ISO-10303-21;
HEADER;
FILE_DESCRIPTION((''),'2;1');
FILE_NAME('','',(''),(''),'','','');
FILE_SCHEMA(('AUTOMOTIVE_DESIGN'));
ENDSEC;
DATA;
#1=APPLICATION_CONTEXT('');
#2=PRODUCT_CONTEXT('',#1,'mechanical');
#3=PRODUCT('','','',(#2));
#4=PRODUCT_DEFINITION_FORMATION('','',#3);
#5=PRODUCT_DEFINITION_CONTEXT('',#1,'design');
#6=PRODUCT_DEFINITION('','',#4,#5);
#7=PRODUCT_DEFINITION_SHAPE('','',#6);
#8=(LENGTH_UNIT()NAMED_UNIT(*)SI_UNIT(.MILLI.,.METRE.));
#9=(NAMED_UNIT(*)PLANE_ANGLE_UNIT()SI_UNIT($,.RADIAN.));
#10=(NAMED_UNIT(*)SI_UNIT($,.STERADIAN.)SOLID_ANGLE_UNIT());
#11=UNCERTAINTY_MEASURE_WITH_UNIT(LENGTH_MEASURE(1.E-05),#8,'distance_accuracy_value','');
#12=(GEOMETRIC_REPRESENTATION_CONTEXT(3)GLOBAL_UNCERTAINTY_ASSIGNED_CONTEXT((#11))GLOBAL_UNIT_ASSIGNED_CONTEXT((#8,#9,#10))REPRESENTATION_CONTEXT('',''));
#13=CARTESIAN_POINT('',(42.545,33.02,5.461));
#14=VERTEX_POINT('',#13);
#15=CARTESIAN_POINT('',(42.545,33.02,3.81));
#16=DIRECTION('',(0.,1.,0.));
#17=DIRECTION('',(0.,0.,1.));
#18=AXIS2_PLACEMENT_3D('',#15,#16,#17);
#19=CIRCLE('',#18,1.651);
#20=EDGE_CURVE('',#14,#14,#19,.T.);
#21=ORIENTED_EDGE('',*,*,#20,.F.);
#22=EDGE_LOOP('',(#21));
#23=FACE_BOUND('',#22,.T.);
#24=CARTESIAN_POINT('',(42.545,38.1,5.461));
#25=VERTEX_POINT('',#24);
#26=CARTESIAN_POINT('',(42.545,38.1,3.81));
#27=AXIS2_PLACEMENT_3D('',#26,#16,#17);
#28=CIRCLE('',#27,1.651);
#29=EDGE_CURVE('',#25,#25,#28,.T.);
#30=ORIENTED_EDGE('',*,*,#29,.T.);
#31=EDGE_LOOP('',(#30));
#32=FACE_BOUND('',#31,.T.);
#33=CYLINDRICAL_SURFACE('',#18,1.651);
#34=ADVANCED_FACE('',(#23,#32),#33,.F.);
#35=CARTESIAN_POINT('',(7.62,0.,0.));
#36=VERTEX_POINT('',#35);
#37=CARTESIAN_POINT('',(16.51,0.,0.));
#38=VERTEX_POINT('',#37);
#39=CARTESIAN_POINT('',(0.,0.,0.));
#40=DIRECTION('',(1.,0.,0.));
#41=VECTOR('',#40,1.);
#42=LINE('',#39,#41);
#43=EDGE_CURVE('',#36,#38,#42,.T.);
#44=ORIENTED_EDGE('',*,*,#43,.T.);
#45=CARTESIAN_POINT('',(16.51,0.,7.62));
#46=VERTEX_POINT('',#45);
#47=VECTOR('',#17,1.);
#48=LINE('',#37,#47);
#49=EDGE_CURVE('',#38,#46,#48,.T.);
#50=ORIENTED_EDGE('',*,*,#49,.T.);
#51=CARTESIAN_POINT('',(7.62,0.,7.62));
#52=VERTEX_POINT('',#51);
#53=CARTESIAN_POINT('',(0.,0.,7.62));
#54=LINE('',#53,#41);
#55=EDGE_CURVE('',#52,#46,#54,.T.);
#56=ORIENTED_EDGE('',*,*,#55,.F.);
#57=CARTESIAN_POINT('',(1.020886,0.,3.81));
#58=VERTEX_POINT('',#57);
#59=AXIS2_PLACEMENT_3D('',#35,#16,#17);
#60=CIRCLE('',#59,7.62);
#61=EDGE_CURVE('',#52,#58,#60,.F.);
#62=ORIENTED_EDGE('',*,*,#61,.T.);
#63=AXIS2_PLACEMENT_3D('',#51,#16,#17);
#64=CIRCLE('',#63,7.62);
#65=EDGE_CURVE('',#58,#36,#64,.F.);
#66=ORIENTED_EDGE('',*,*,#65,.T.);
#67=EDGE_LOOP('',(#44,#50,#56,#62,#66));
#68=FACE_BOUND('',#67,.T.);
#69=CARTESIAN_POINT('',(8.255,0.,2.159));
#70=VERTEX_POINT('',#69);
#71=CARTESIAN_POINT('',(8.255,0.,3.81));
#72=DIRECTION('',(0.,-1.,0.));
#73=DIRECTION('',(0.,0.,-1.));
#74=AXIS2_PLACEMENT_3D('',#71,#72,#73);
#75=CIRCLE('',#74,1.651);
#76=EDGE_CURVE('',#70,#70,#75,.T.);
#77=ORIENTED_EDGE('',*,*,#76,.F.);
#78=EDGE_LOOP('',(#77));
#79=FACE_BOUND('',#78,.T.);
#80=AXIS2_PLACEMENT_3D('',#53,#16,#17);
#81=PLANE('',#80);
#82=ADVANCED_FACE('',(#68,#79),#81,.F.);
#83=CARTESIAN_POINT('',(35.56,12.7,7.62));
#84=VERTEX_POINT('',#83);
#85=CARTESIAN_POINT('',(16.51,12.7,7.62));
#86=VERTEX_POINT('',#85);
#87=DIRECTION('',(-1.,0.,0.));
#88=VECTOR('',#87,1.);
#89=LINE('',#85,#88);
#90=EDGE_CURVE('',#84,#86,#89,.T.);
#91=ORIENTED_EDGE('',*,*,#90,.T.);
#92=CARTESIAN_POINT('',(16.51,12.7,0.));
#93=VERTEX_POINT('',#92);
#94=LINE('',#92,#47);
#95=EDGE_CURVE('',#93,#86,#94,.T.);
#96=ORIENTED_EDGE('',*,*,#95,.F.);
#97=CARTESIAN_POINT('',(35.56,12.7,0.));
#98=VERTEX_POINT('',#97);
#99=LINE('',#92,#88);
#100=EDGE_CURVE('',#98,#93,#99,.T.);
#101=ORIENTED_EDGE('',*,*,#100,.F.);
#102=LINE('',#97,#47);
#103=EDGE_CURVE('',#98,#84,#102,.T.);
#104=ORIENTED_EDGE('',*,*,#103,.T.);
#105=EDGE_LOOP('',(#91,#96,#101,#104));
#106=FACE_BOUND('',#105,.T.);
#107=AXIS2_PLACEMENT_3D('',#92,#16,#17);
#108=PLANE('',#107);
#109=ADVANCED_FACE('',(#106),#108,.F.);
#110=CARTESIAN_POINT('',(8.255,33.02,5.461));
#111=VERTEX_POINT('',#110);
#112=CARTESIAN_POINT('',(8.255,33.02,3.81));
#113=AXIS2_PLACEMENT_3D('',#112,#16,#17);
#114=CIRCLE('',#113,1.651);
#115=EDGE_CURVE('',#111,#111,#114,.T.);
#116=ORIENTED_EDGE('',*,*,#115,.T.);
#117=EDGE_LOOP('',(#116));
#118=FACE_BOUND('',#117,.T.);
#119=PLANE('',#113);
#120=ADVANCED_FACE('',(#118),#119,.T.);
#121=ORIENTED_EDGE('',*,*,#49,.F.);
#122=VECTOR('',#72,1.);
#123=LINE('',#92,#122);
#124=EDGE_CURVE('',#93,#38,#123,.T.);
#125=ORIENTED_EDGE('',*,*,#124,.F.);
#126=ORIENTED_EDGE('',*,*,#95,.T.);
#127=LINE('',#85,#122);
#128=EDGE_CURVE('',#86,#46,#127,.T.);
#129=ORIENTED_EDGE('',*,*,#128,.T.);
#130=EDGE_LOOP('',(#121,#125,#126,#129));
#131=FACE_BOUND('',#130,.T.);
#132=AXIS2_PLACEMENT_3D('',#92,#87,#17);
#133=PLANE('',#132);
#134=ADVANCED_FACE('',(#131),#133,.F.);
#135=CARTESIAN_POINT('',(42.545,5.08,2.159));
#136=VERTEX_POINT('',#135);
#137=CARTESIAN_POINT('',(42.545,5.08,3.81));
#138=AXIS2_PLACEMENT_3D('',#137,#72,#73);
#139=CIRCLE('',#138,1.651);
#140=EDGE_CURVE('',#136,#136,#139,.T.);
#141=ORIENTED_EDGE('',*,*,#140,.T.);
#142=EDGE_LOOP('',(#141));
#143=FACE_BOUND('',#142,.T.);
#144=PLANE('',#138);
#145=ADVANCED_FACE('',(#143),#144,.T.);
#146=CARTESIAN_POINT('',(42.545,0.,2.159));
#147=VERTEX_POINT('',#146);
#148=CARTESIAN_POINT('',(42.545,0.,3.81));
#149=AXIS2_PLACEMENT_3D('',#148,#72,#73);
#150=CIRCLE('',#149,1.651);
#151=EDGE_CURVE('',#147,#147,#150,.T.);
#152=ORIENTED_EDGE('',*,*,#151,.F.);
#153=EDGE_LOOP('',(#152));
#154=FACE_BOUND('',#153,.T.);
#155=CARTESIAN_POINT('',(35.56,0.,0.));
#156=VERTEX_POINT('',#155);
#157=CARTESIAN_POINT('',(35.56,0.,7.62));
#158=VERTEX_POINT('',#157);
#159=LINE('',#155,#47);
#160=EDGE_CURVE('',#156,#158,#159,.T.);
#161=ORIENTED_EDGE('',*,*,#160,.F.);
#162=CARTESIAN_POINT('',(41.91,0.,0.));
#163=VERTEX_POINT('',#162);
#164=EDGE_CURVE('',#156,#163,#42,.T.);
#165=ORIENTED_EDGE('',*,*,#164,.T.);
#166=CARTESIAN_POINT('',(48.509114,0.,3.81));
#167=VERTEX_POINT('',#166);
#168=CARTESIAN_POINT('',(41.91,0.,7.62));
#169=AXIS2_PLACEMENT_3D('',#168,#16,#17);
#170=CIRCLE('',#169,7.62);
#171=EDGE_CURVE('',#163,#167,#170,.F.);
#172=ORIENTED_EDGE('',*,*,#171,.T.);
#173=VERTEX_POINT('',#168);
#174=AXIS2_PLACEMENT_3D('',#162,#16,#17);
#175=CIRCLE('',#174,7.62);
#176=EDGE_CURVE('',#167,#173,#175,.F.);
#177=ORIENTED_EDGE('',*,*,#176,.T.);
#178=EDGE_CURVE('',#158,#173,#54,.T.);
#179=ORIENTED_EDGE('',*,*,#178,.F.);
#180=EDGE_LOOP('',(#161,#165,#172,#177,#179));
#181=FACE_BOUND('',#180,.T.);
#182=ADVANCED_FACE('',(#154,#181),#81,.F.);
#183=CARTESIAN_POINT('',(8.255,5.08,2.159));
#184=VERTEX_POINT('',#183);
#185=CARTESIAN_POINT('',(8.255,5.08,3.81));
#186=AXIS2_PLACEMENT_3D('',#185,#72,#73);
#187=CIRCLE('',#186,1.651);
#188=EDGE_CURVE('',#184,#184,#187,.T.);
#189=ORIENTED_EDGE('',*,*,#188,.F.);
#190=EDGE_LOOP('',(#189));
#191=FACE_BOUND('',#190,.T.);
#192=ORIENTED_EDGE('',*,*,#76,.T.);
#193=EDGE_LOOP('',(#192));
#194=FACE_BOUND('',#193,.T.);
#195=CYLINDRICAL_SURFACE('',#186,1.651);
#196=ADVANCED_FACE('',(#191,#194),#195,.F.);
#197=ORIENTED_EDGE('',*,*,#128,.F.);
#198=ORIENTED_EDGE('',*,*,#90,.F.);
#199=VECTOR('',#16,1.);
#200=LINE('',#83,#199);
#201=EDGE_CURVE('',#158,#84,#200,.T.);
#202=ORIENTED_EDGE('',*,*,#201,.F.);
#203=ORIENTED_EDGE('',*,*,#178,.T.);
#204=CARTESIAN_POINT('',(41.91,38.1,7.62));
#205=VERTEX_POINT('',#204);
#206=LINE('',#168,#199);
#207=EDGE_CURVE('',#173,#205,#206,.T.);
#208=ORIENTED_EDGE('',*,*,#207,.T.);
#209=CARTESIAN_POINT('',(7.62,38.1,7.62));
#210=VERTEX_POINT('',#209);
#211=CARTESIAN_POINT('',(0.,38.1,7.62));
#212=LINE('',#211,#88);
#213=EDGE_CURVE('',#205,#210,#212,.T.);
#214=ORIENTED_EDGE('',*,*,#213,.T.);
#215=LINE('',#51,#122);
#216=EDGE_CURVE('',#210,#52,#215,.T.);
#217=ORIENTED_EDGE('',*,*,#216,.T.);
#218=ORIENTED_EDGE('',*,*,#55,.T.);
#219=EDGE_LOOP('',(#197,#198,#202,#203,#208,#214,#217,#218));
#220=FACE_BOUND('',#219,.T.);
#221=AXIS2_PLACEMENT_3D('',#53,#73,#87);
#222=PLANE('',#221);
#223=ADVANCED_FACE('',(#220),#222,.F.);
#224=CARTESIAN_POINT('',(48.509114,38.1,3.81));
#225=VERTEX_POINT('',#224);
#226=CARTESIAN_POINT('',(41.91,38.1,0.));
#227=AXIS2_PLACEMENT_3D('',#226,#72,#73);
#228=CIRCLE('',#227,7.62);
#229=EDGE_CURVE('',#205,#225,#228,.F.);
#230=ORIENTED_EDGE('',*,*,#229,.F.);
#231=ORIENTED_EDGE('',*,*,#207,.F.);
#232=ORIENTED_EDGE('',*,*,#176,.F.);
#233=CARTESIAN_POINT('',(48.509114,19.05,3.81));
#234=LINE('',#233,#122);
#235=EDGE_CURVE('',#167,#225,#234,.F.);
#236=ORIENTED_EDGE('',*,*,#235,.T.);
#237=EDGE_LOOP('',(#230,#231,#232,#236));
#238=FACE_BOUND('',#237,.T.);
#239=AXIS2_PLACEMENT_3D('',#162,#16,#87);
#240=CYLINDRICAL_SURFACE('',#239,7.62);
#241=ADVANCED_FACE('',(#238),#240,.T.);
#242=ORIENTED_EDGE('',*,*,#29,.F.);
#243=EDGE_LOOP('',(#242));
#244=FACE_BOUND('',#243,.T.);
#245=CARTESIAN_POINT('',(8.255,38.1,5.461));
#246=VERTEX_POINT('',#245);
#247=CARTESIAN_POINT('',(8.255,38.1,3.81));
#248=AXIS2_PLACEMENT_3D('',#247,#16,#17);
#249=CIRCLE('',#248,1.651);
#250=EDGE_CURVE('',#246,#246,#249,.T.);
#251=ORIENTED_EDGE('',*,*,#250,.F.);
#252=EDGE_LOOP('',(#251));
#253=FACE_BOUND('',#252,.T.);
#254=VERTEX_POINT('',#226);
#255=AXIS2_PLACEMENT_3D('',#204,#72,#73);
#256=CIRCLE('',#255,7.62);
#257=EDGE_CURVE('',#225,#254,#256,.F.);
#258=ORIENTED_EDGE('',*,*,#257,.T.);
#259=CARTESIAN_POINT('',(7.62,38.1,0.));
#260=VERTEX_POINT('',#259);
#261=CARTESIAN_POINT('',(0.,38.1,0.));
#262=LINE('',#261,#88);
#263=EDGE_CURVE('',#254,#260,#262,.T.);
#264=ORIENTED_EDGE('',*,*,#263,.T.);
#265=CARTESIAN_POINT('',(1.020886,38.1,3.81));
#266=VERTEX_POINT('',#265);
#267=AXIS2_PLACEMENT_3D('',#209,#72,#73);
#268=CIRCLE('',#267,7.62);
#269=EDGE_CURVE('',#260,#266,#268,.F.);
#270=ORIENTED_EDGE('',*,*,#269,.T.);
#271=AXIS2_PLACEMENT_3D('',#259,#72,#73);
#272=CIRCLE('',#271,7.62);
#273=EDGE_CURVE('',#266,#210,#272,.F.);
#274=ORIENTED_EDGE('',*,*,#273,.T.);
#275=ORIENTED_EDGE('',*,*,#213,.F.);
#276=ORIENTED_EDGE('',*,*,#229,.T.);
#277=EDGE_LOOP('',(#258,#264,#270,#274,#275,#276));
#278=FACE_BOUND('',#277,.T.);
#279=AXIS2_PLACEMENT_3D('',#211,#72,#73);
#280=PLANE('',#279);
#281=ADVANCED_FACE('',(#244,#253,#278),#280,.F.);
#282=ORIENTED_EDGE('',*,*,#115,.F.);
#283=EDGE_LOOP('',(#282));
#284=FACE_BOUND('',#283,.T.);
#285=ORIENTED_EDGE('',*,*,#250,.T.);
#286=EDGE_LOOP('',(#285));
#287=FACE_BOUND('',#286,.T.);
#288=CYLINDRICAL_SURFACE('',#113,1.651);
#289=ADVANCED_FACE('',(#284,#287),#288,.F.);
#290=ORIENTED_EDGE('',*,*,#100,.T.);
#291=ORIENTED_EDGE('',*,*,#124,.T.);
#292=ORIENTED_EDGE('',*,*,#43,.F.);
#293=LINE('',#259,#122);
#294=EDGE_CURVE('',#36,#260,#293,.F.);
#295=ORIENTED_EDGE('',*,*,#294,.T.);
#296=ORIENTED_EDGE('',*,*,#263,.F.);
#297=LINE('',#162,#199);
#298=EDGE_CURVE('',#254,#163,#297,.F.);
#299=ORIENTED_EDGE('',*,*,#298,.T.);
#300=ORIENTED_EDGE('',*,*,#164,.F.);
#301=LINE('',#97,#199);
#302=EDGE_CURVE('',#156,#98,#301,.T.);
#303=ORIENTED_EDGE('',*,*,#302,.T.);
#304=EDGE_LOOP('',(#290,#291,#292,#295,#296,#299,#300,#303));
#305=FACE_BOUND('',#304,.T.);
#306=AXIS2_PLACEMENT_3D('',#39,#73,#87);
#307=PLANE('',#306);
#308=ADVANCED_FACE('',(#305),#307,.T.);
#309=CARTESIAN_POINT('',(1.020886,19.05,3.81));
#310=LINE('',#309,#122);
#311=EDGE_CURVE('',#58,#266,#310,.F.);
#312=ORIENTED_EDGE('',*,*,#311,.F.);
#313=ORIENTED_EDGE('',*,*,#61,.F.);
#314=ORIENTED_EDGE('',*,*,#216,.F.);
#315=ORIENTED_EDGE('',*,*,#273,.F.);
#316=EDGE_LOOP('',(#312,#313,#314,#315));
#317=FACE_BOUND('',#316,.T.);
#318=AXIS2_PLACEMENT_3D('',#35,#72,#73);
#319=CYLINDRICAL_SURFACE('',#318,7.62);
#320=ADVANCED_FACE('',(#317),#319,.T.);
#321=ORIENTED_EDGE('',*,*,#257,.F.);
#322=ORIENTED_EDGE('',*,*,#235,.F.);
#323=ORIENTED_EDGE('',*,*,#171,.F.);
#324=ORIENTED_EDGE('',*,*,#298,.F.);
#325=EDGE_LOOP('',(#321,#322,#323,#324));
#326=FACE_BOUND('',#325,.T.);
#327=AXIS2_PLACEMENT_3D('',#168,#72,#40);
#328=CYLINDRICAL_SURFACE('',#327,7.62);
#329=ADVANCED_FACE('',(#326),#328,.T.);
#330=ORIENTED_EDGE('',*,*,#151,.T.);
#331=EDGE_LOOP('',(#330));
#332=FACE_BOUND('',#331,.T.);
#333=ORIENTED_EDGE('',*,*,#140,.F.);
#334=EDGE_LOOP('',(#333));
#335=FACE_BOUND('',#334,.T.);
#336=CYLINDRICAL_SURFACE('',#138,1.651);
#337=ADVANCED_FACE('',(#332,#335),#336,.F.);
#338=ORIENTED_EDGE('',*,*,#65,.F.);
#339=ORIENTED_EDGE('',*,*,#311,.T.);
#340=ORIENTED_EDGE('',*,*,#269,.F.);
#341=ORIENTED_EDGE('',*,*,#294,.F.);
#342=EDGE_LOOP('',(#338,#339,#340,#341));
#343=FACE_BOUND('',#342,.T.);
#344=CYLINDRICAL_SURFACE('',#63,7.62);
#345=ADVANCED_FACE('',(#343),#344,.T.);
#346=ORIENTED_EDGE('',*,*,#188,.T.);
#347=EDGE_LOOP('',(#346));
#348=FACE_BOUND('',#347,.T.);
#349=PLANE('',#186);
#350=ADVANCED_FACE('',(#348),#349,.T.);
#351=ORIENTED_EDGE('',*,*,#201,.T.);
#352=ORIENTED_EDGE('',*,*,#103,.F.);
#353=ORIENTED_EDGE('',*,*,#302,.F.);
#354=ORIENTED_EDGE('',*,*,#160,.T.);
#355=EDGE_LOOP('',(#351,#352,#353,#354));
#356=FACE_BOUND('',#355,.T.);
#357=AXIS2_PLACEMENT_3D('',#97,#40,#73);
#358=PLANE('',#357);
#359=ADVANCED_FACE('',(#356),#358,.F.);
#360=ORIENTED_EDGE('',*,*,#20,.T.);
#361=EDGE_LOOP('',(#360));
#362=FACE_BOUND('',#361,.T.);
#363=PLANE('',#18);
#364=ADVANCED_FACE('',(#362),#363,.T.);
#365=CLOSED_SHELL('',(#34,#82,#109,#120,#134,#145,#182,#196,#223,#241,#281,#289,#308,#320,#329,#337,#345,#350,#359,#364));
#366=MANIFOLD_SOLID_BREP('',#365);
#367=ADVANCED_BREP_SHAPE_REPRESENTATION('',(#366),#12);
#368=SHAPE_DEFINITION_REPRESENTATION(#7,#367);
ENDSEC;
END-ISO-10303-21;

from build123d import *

# Parameters (mm, degrees)
SKETCH3_W           = 49.53
SKETCH3_H           = 38.1
BOSS_EXTRUDE2_DEPTH = 7.62
SKETCH4_W           = 19.05
SKETCH4_H           = 12.7
CUT_EXTRUDE1_DEPTH  = 63.951531355
SKETCH6_R           = 1.651
CUT_EXTRUDE2_DEPTH  = 5.08
CUT_EXTRUDE3_START  = -5.08
SKETCH8_R           = 1.651
CUT_EXTRUDE3_DEPTH  = 5.08
FILLET3_R           = 7.62


with BuildPart() as part:
    # Sketch3 → Boss-Extrude2 (new body)
    with BuildSketch(Plane.XY):
        with Locations((24.765, 19.05)):
            Rectangle(SKETCH3_W, SKETCH3_H)
    extrude(amount=BOSS_EXTRUDE2_DEPTH)

    # Sketch4 → Cut-Extrude1 (cut, through all)
    with BuildSketch(Plane.XY.offset(7.62)):
        with Locations((26.035, 6.35)):
            Rectangle(SKETCH4_W, SKETCH4_H)
    extrude(amount=-CUT_EXTRUDE1_DEPTH, mode=Mode.SUBTRACT)

    # Sketch6 → Cut-Extrude2 (cut)
    with BuildSketch(Plane.XZ):
        with Locations(Location((8.255, 3.81, 0), (0, 0, 270))):
            Circle(SKETCH6_R)
        with Locations(Location((42.545, 3.81, 0), (0, 0, 270))):
            Circle(SKETCH6_R)
    extrude(amount=-CUT_EXTRUDE2_DEPTH, mode=Mode.SUBTRACT)

    # Sketch8 → Cut-Extrude3 (cut)
    with BuildSketch(Plane(origin=(0, 38.1, 0), x_dir=(1, 0, 0), z_dir=(0, 1, 0)).offset(CUT_EXTRUDE3_START)):
        with Locations(Location((8.255, -3.81, 0), (0, 0, 90))):
            Circle(SKETCH8_R)
        with Locations(Location((42.545, -3.81, 0), (0, 0, 90))):
            Circle(SKETCH8_R)
    extrude(amount=CUT_EXTRUDE3_DEPTH, mode=Mode.SUBTRACT)

    # Fillet3
    # the kernel refuses this fillet: 7.62 mm, written as the material it takes off along each edge
    with BuildSketch(Plane(origin=(49.53, -19.05, 7.62), x_dir=(-1, 0, 0), z_dir=(0, 1, 0))) as fillet3_piece_1:
        with BuildLine():
            CenterArc((FILLET3_R, -FILLET3_R), FILLET3_R, 90, 90)
            Line((0, -FILLET3_R), (0, 0))
            Line((0, 0), (FILLET3_R, 0))
        make_face()
    extrude(amount=76.2, mode=Mode.SUBTRACT)
    with BuildSketch(Plane(origin=(49.53, -19.05, 0), x_dir=(-1, 0, 0), z_dir=(0, 1, 0)), Plane(origin=(0, 57.15, 0), x_dir=(1, 0, 0), z_dir=(0, -1, 0)), Plane(origin=(0, 57.15, 7.62), x_dir=(0, 0, -1), z_dir=(0, -1, 0))) as fillet3_piece_2:
        with BuildLine():
            CenterArc((FILLET3_R, FILLET3_R), FILLET3_R, 180, 90)
            Line((0, FILLET3_R), (0, 0))
            Line((0, 0), (FILLET3_R, 0))
        make_face()
    extrude(amount=76.2, mode=Mode.SUBTRACT)


solid = part.part
